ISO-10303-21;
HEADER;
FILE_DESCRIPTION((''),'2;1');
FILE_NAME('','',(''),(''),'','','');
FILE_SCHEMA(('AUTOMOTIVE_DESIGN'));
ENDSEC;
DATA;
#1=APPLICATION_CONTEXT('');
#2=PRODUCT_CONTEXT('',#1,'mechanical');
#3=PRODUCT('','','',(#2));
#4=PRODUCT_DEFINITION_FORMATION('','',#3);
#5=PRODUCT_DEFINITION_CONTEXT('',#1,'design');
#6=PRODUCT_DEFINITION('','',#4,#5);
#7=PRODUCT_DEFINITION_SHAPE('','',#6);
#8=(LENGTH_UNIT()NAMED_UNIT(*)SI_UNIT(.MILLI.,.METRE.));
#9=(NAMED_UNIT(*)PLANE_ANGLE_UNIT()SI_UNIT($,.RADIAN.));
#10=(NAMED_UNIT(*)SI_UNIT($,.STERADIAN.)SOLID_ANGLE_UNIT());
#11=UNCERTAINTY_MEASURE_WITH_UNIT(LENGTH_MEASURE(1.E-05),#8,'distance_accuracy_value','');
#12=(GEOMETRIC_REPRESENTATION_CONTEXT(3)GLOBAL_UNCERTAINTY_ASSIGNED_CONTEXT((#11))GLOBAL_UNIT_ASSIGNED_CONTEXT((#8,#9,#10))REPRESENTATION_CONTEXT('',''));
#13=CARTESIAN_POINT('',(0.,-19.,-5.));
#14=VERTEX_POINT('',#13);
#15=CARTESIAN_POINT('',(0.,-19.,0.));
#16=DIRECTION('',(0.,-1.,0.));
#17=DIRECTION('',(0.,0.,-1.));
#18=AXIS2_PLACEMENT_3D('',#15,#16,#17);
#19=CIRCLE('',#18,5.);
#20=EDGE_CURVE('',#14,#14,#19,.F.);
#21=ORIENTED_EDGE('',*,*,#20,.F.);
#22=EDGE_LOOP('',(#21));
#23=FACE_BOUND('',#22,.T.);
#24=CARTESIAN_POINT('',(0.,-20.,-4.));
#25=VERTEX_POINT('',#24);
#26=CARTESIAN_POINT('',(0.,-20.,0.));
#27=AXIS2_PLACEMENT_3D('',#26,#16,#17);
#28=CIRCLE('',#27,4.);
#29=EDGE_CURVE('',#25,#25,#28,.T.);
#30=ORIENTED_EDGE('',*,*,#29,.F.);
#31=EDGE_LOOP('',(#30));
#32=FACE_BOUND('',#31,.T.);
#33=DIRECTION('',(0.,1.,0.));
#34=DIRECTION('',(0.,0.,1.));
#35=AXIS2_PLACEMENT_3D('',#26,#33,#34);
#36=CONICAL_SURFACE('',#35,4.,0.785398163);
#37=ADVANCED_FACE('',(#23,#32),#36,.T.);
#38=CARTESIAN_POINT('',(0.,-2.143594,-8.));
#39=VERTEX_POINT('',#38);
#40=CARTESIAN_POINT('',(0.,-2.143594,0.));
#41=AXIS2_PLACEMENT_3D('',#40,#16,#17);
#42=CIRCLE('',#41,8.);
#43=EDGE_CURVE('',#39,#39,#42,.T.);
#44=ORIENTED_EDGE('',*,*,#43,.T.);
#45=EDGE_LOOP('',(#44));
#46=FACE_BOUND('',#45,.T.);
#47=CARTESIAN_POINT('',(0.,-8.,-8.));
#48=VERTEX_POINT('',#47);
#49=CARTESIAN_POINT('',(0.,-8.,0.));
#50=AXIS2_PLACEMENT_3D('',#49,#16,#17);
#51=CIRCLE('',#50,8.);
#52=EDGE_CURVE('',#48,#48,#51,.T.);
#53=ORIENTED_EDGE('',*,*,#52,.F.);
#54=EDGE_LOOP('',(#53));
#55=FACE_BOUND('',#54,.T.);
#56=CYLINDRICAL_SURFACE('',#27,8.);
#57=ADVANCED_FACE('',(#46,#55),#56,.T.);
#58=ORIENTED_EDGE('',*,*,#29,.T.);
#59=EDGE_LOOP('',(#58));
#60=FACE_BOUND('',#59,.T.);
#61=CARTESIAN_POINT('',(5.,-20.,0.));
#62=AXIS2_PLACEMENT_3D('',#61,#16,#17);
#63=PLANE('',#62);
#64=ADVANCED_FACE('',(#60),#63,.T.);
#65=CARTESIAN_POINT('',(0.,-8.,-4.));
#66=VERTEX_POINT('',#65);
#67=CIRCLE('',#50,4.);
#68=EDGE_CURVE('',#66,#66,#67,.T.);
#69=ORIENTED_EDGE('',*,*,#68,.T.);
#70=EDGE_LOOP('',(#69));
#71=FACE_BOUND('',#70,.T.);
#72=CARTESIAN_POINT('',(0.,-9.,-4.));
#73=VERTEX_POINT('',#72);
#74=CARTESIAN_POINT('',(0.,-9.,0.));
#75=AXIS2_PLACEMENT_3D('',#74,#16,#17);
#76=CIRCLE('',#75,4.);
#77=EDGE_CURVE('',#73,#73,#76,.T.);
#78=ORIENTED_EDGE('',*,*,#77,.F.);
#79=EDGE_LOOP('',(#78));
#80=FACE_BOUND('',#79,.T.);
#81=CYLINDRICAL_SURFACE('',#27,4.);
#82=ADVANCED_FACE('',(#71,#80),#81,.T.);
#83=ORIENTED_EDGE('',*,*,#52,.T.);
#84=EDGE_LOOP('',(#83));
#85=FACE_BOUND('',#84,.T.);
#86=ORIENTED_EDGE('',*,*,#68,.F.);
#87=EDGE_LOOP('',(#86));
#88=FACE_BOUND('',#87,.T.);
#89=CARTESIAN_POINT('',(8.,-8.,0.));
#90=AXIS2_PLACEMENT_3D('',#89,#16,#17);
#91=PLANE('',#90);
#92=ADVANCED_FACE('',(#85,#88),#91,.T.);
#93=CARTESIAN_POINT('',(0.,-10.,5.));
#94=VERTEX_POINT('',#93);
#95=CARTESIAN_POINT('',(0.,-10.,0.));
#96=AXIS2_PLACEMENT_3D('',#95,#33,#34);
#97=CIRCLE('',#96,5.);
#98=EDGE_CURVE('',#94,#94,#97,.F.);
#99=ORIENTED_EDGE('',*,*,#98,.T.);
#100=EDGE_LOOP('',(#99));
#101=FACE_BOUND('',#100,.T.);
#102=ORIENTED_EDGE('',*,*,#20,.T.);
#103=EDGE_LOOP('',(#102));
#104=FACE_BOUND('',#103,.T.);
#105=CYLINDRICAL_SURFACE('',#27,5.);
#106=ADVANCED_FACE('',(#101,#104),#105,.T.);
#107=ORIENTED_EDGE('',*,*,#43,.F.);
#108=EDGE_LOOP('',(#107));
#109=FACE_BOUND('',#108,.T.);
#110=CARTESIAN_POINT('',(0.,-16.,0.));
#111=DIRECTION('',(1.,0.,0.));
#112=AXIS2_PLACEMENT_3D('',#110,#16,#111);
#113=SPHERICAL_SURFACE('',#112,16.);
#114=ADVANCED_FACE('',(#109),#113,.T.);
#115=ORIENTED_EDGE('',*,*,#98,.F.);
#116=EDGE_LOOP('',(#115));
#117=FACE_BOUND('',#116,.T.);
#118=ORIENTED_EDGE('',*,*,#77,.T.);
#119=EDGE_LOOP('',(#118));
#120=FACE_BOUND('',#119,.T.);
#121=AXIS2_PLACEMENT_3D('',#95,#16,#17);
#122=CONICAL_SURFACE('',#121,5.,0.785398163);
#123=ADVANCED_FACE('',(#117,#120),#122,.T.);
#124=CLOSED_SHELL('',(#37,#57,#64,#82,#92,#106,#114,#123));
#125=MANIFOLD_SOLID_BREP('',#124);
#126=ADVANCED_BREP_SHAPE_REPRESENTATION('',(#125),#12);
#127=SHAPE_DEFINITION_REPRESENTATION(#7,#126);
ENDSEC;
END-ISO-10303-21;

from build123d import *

# Parameters (mm, degrees)
CHAMFER_1_SIZE = 1


with BuildPart() as part:
    # 草图1 → 旋转1 (revolve)
    with BuildSketch(Plane.XY, mode=Mode.PRIVATE) as revolve_1_sk:
        with BuildLine():
            Line((8, -2.143593539), (8, -8))
            Line((8, -8), (4, -8))
            Line((4, -8), (4, -9))
            Line((4, -9), (5, -9))
            Line((5, -9), (5, -20))
            Line((5, -20), (0, -20))
            Line((0, -20), (0, 0))
            ThreePointArc((0, 0), (4.141104722, -0.545186779), (8, -2.143593539))
        make_face()
    revolve(revolve_1_sk.sketch.rotate(Axis((0, -20, 0), (0, 1, 0)), 90), axis=Axis((0, -20, 0), (0, 1, 0)))

    # 倒角1
    chamfer_1_edges = [part.edges().sort_by_distance(p)[0] for p in [
        (0, -9, 5),
        (0, -20, 5),
    ]]
    chamfer(chamfer_1_edges, length=CHAMFER_1_SIZE - 0.0001)  # a hair under: the kernel refuses the full size


solid = part.part
